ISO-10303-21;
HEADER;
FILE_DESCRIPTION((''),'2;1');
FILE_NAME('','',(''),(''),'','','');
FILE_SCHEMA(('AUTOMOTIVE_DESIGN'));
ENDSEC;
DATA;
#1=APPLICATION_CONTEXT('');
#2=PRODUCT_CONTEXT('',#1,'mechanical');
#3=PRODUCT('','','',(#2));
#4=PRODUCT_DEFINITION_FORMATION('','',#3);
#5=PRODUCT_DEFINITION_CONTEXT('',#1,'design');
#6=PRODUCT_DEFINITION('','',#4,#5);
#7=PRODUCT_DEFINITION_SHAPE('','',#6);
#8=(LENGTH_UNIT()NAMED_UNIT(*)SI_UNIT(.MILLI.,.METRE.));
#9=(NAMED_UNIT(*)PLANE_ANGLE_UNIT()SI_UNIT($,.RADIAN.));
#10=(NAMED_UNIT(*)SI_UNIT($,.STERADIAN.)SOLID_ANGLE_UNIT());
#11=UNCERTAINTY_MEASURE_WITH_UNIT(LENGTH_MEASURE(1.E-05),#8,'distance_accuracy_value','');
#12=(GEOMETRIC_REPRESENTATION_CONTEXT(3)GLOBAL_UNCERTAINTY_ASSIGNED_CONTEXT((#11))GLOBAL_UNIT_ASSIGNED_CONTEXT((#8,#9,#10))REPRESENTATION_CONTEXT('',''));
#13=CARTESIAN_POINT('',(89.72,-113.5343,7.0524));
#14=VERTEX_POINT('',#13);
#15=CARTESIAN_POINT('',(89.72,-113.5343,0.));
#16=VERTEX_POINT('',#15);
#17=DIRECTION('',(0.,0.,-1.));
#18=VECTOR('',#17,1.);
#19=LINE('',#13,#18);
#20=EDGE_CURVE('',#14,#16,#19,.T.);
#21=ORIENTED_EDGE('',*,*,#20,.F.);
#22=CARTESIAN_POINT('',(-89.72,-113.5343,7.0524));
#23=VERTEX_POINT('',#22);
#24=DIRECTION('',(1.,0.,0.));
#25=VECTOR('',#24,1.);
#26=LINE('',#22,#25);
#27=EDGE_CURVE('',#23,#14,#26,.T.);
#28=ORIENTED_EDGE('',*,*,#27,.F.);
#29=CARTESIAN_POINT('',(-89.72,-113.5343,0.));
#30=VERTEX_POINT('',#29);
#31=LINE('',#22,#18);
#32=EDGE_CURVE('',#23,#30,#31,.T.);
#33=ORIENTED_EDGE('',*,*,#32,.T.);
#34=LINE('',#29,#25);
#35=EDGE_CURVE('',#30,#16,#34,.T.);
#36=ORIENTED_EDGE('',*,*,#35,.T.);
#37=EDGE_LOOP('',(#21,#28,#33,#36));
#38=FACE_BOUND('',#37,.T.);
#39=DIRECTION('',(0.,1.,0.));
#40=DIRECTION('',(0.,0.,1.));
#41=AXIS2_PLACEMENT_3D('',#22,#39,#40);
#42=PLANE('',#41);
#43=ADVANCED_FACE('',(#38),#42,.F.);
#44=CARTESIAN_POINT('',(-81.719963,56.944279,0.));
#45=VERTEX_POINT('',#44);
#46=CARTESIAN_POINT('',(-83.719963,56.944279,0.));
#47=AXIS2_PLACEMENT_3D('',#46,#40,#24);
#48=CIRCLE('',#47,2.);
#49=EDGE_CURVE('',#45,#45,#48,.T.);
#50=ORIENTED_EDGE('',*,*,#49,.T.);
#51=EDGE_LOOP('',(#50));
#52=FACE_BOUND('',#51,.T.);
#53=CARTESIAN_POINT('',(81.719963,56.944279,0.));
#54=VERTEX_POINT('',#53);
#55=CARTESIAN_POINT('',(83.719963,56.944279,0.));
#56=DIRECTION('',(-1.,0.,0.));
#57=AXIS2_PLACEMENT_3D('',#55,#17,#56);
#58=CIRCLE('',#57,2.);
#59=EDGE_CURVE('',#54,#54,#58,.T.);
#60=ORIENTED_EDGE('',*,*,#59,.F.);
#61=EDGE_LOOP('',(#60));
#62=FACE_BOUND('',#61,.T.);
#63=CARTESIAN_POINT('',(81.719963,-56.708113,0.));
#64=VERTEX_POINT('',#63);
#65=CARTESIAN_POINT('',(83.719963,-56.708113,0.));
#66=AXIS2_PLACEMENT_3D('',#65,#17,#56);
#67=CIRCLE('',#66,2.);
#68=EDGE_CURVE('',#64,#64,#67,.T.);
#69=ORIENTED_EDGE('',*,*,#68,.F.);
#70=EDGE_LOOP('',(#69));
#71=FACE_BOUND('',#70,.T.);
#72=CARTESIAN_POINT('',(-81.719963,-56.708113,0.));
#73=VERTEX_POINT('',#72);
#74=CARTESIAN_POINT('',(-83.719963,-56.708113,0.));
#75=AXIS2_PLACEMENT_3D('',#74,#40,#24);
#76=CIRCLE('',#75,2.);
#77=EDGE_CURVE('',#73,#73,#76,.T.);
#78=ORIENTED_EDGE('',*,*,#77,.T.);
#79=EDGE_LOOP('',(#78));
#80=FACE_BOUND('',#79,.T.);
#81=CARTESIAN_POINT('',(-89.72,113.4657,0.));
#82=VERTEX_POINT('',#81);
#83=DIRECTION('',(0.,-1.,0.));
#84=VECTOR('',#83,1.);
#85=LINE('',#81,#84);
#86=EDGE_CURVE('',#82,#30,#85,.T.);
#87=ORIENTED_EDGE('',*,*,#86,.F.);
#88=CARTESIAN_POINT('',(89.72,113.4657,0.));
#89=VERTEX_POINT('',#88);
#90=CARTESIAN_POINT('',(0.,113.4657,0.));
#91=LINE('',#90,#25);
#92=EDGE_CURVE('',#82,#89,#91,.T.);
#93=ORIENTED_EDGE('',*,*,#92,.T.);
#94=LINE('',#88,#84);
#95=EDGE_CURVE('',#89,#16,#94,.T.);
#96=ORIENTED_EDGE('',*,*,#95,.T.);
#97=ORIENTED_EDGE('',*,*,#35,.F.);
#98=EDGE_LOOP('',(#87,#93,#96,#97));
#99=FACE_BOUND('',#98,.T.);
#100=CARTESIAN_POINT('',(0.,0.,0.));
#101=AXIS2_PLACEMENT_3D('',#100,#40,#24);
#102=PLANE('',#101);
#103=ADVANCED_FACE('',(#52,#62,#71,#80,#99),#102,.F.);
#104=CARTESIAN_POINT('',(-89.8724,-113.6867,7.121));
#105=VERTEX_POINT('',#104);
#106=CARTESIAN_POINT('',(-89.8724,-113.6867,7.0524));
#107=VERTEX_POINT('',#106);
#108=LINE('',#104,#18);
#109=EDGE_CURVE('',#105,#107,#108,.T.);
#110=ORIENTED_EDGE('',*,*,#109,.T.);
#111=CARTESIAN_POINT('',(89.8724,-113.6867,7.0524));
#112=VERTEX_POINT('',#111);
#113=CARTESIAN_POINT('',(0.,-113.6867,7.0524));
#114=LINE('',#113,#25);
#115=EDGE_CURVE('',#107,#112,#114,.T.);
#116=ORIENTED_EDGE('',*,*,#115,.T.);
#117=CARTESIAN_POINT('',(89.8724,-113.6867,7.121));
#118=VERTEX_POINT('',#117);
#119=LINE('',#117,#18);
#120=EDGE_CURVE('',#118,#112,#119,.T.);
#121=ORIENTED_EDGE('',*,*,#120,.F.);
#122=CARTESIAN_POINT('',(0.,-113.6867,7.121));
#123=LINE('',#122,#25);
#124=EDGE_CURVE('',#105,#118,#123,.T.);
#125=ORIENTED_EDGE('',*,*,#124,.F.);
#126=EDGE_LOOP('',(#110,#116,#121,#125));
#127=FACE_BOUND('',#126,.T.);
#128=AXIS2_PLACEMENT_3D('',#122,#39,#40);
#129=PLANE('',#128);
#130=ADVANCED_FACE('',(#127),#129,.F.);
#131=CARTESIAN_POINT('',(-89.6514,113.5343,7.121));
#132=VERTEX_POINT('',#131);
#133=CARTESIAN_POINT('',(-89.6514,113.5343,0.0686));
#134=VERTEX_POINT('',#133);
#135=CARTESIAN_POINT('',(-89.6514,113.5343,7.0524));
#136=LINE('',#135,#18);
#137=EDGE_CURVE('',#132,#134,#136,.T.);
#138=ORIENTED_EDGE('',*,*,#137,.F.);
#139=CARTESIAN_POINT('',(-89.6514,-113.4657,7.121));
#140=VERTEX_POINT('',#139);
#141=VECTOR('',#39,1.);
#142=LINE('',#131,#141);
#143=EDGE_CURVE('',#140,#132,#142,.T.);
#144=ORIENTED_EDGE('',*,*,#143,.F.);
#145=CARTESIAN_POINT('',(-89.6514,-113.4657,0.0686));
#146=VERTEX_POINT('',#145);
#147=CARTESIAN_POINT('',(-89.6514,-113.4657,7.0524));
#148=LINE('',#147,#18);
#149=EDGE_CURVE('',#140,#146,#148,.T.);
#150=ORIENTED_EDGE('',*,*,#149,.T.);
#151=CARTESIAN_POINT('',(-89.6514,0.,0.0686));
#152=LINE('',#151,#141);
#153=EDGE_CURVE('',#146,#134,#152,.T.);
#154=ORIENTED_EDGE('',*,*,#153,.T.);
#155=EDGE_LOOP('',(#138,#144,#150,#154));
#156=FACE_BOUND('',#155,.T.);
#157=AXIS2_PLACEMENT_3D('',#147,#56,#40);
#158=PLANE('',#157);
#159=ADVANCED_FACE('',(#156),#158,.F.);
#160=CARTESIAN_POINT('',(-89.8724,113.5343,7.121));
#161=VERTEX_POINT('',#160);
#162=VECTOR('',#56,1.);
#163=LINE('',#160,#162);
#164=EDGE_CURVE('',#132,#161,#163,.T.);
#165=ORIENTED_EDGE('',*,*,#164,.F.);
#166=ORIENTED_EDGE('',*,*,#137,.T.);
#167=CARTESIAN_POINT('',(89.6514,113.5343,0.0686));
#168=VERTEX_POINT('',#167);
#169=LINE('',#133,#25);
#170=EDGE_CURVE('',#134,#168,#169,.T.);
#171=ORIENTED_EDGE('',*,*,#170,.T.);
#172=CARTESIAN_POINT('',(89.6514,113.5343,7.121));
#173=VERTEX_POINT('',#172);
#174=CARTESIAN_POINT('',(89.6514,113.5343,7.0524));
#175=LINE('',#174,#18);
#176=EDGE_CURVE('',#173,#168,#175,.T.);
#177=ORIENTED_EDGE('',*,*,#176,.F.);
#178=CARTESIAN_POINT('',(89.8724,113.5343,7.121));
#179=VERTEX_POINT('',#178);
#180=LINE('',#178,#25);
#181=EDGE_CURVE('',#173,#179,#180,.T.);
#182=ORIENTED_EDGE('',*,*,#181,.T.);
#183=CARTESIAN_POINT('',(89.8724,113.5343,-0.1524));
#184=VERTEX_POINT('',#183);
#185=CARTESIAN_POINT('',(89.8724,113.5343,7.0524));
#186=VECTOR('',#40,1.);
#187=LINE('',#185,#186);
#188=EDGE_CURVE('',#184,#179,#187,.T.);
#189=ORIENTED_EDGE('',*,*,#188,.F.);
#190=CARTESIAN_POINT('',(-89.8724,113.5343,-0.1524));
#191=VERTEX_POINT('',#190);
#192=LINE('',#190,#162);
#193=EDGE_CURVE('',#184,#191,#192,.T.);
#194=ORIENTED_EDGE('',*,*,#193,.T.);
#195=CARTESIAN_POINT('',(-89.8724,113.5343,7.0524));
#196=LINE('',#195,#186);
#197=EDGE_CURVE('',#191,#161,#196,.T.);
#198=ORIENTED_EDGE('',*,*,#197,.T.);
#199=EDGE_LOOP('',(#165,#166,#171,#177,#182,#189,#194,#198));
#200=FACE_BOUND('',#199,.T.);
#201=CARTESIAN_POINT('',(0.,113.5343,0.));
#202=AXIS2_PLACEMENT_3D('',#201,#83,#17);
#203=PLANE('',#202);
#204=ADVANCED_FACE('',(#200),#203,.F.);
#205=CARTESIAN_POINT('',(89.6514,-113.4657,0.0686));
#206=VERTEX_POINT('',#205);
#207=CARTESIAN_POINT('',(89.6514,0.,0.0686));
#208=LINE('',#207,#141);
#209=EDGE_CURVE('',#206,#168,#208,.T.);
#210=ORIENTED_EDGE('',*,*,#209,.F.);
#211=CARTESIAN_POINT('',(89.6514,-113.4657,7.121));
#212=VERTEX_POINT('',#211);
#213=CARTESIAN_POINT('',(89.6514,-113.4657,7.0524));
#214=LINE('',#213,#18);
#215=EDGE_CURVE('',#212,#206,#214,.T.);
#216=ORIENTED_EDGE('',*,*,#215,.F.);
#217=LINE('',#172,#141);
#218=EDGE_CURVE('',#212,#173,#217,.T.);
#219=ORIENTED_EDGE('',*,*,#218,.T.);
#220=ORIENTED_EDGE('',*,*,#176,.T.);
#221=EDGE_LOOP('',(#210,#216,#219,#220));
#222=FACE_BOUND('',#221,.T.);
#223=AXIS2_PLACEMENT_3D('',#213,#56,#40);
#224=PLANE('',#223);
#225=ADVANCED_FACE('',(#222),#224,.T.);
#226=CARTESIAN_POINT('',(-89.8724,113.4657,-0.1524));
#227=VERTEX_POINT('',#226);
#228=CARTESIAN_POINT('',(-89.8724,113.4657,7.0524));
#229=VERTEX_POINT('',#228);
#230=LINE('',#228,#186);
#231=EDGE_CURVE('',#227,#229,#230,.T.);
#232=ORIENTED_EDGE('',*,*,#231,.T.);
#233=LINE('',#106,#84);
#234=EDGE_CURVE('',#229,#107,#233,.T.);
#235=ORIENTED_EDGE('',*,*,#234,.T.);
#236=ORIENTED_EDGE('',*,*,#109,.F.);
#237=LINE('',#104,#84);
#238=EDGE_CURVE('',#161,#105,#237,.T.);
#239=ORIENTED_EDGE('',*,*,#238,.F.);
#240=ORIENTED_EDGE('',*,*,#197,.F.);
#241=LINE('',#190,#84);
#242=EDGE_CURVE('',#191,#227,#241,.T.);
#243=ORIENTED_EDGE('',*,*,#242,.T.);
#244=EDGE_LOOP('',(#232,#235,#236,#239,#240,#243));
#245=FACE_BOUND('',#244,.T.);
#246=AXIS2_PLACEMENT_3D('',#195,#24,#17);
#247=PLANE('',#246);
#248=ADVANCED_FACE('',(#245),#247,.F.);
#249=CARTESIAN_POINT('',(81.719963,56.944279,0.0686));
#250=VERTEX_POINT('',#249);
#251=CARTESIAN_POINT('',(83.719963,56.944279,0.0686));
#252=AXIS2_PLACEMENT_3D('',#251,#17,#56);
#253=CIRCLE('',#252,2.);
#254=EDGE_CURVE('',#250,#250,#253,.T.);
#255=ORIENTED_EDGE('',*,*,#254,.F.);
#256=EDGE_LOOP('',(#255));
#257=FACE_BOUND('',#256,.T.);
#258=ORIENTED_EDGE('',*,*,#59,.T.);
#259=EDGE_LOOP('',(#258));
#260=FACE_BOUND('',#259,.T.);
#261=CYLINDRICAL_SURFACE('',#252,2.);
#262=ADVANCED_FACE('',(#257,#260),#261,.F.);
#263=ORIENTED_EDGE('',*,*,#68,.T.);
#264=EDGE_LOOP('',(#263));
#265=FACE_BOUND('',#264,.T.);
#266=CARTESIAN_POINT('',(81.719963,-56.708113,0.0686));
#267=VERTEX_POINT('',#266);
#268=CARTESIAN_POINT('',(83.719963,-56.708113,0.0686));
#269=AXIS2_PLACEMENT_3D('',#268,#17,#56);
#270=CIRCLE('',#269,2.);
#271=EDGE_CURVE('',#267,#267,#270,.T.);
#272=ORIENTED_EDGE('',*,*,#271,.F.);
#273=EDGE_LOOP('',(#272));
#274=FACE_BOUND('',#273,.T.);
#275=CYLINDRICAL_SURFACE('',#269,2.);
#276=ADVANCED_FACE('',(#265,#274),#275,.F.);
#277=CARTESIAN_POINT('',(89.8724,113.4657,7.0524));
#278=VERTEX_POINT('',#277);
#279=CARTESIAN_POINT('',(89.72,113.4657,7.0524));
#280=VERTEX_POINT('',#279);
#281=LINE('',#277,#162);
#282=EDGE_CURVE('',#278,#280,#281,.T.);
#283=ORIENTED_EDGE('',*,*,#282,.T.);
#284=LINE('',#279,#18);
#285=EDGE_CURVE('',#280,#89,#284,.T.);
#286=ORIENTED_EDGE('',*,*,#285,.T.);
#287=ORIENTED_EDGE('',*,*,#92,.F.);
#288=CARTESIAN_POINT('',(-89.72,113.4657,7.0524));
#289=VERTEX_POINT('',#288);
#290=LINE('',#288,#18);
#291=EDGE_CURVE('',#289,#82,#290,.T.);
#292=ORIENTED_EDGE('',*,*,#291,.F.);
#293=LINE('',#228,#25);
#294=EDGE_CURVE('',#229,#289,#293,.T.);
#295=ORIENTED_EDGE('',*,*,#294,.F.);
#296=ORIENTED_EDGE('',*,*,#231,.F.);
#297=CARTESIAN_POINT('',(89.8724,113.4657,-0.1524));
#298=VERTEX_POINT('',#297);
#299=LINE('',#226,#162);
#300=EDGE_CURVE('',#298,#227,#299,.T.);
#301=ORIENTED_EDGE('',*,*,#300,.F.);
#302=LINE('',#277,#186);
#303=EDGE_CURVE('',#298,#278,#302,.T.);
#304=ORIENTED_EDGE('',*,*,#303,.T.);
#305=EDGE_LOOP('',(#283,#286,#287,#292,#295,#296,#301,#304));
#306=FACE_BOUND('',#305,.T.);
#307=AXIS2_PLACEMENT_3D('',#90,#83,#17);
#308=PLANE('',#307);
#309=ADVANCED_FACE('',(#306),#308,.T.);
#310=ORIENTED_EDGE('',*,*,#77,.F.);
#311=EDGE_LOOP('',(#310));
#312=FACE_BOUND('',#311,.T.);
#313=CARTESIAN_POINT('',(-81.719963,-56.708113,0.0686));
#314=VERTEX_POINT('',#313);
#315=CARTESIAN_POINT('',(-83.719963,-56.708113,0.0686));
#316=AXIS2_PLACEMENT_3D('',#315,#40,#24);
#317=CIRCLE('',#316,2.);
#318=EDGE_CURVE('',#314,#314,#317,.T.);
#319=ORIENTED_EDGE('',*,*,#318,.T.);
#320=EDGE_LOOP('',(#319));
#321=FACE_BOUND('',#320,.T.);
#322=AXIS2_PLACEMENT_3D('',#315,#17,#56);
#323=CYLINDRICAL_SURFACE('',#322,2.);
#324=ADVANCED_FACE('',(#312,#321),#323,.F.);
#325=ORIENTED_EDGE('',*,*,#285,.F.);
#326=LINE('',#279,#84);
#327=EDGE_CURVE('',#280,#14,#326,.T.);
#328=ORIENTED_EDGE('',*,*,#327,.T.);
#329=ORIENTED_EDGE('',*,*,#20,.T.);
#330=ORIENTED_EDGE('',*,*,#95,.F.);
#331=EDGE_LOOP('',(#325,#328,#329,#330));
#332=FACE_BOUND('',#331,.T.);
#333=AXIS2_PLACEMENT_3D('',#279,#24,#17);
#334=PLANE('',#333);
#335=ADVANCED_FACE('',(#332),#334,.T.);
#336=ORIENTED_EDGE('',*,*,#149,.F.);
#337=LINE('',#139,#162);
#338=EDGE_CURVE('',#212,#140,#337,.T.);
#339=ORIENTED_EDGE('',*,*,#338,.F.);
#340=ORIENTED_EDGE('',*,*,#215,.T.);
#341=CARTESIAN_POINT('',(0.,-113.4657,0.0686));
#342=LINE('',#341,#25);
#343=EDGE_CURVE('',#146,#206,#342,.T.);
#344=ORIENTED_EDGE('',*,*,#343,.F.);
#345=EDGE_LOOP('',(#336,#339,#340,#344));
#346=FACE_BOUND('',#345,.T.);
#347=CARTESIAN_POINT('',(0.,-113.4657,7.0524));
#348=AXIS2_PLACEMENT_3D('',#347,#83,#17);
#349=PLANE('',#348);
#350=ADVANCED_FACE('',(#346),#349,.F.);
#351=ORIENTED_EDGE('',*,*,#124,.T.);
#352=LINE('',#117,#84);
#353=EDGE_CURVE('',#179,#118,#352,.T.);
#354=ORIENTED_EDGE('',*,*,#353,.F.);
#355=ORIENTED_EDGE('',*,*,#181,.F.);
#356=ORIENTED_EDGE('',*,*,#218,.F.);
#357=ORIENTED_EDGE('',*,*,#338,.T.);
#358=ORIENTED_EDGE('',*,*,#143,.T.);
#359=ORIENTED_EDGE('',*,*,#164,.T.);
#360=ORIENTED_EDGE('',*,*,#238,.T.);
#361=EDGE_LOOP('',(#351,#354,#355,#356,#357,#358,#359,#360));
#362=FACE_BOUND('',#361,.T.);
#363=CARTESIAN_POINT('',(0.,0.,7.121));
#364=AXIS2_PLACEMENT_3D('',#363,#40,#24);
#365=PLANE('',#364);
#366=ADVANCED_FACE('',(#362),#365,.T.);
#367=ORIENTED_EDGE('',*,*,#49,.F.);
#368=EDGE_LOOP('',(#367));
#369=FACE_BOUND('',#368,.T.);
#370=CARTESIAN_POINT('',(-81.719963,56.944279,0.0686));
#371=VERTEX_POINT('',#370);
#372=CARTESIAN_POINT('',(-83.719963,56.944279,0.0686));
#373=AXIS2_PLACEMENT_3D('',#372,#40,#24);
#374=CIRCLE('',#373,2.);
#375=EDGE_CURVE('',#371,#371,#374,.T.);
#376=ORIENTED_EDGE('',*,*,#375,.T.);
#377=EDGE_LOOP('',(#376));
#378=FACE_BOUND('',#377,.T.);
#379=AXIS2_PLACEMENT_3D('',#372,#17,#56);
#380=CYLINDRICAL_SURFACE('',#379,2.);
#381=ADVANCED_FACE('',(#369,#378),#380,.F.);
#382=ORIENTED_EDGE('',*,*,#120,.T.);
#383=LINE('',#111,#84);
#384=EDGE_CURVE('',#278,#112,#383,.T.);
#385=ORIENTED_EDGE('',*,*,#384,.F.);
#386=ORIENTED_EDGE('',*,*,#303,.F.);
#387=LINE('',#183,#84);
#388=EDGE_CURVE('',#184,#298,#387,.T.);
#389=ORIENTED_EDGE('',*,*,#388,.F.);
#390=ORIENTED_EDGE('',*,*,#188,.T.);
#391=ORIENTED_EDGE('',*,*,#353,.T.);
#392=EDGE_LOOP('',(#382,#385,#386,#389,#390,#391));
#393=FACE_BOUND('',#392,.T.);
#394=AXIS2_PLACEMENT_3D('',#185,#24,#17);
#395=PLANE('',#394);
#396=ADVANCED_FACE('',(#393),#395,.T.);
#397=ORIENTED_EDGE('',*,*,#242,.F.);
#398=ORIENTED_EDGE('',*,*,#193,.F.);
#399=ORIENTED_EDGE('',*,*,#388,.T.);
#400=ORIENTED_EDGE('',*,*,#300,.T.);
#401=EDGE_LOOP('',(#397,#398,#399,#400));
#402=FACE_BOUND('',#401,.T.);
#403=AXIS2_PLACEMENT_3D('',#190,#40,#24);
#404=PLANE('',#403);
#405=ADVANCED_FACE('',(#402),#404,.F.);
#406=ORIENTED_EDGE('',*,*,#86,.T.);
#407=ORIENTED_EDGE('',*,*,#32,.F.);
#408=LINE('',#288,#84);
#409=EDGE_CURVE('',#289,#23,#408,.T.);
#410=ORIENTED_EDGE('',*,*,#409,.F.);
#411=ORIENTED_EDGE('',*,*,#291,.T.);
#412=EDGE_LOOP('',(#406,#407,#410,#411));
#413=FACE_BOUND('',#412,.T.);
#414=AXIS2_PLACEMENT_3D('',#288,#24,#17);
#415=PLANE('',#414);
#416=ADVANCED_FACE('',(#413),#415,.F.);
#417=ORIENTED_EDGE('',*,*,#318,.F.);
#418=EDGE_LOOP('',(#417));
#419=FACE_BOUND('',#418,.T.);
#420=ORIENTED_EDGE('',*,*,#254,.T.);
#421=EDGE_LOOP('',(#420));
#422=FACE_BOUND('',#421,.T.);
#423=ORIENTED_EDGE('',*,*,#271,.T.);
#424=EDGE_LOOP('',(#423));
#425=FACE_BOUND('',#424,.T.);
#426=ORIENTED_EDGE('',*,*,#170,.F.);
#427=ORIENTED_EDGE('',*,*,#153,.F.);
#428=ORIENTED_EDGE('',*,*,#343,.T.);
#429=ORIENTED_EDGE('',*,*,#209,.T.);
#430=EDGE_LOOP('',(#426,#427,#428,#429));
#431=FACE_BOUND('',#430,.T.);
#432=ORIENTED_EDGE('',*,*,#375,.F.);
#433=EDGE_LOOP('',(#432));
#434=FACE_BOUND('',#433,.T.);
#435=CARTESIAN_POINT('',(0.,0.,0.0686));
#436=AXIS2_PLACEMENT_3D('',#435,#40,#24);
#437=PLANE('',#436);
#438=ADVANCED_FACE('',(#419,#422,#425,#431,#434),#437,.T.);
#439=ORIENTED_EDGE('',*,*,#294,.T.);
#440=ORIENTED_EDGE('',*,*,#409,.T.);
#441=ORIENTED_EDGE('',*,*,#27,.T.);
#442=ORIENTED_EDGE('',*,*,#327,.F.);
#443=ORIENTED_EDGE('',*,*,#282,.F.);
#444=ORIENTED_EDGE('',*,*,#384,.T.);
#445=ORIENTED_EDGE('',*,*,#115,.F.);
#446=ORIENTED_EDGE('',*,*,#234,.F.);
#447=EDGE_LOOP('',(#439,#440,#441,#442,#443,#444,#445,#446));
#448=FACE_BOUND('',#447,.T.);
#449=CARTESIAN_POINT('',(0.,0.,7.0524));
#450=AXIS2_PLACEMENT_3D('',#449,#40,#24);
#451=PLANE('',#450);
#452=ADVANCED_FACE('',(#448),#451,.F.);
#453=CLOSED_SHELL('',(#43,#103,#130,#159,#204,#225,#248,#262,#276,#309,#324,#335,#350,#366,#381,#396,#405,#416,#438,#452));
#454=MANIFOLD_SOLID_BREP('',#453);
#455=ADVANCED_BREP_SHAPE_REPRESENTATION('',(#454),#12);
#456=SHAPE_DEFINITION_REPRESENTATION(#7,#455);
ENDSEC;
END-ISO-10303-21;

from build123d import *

# Parameters (mm, degrees)
SKETCH1_W             = 89.6514
SKETCH1_H             = 226.9314
SKETCH1_R             = 2
HEAT_EXCHANGER_DEPTH  = 0.0686
CONVECTION_FINS_DEPTH = 7.0524
TOP_OVERWRAP_DEPTH    = 0.0686
SIDE_OVERWRAP_DEPTH   = 0.0686


with BuildPart() as part:
    # Sketch1 → Heat Exchanger (new body)
    with BuildSketch(Plane.XY):
        with Locations((-44.8257, 0)):
            Rectangle(SKETCH1_W, SKETCH1_H)
        with Locations((-83.71996294, -56.7081132)):
            Circle(SKETCH1_R, mode=Mode.SUBTRACT)
        with Locations((-83.71996294, 56.94427919)):
            Circle(SKETCH1_R, mode=Mode.SUBTRACT)
    heat_exchanger = extrude(amount=HEAT_EXCHANGER_DEPTH)

    # Sketch3 → Convection Fins (add)
    with BuildSketch(Plane.XY):
        Polygon((0, -113.5343), (0, -113.4657), (-89.6514, -113.4657), (-89.6514, 113.4657), (-89.72, 113.4657), (-89.72, -113.5343), align=None)
    convection_fins = extrude(amount=CONVECTION_FINS_DEPTH)

    # Sketch5 → Top Overwrap (add)
    with BuildSketch(Plane(origin=(0, 113.4657, 0), x_dir=(1, 0, 0), z_dir=(0, 1, 0))):
        Polygon((-89.8724, -7.0524), (-89.6514, -7.0524), (-89.6514, -0.0686), (0, -0.0686), (0, 0.1524), (-89.8724, 0.1524), align=None)
    top_overwrap = extrude(amount=TOP_OVERWRAP_DEPTH)

    # Sketch7 → Side Overwrap (add)
    with BuildSketch(Plane.XY.offset(7.0524)):
        Polygon((-89.8724, 113.5343), (-89.6514, 113.5343), (-89.6514, -113.4657), (0, -113.4657), (0, -113.6867), (-89.8724, -113.6867), align=None)
    side_overwrap = extrude(amount=SIDE_OVERWRAP_DEPTH)

    # Mirror1: Heat Exchanger, Convection Fins, Top Overwrap, Side Overwrap across plane
    add(heat_exchanger.mirror(Plane(origin=(0, 0, 0), x_dir=(0, 0, 1), z_dir=(1, 0, 0))))
    add(convection_fins.mirror(Plane(origin=(0, 0, 0), x_dir=(0, 0, 1), z_dir=(1, 0, 0))))
    add(top_overwrap.mirror(Plane(origin=(0, 0, 0), x_dir=(0, 0, 1), z_dir=(1, 0, 0))))
    add(side_overwrap.mirror(Plane(origin=(0, 0, 0), x_dir=(0, 0, 1), z_dir=(1, 0, 0))))


solid = part.part
